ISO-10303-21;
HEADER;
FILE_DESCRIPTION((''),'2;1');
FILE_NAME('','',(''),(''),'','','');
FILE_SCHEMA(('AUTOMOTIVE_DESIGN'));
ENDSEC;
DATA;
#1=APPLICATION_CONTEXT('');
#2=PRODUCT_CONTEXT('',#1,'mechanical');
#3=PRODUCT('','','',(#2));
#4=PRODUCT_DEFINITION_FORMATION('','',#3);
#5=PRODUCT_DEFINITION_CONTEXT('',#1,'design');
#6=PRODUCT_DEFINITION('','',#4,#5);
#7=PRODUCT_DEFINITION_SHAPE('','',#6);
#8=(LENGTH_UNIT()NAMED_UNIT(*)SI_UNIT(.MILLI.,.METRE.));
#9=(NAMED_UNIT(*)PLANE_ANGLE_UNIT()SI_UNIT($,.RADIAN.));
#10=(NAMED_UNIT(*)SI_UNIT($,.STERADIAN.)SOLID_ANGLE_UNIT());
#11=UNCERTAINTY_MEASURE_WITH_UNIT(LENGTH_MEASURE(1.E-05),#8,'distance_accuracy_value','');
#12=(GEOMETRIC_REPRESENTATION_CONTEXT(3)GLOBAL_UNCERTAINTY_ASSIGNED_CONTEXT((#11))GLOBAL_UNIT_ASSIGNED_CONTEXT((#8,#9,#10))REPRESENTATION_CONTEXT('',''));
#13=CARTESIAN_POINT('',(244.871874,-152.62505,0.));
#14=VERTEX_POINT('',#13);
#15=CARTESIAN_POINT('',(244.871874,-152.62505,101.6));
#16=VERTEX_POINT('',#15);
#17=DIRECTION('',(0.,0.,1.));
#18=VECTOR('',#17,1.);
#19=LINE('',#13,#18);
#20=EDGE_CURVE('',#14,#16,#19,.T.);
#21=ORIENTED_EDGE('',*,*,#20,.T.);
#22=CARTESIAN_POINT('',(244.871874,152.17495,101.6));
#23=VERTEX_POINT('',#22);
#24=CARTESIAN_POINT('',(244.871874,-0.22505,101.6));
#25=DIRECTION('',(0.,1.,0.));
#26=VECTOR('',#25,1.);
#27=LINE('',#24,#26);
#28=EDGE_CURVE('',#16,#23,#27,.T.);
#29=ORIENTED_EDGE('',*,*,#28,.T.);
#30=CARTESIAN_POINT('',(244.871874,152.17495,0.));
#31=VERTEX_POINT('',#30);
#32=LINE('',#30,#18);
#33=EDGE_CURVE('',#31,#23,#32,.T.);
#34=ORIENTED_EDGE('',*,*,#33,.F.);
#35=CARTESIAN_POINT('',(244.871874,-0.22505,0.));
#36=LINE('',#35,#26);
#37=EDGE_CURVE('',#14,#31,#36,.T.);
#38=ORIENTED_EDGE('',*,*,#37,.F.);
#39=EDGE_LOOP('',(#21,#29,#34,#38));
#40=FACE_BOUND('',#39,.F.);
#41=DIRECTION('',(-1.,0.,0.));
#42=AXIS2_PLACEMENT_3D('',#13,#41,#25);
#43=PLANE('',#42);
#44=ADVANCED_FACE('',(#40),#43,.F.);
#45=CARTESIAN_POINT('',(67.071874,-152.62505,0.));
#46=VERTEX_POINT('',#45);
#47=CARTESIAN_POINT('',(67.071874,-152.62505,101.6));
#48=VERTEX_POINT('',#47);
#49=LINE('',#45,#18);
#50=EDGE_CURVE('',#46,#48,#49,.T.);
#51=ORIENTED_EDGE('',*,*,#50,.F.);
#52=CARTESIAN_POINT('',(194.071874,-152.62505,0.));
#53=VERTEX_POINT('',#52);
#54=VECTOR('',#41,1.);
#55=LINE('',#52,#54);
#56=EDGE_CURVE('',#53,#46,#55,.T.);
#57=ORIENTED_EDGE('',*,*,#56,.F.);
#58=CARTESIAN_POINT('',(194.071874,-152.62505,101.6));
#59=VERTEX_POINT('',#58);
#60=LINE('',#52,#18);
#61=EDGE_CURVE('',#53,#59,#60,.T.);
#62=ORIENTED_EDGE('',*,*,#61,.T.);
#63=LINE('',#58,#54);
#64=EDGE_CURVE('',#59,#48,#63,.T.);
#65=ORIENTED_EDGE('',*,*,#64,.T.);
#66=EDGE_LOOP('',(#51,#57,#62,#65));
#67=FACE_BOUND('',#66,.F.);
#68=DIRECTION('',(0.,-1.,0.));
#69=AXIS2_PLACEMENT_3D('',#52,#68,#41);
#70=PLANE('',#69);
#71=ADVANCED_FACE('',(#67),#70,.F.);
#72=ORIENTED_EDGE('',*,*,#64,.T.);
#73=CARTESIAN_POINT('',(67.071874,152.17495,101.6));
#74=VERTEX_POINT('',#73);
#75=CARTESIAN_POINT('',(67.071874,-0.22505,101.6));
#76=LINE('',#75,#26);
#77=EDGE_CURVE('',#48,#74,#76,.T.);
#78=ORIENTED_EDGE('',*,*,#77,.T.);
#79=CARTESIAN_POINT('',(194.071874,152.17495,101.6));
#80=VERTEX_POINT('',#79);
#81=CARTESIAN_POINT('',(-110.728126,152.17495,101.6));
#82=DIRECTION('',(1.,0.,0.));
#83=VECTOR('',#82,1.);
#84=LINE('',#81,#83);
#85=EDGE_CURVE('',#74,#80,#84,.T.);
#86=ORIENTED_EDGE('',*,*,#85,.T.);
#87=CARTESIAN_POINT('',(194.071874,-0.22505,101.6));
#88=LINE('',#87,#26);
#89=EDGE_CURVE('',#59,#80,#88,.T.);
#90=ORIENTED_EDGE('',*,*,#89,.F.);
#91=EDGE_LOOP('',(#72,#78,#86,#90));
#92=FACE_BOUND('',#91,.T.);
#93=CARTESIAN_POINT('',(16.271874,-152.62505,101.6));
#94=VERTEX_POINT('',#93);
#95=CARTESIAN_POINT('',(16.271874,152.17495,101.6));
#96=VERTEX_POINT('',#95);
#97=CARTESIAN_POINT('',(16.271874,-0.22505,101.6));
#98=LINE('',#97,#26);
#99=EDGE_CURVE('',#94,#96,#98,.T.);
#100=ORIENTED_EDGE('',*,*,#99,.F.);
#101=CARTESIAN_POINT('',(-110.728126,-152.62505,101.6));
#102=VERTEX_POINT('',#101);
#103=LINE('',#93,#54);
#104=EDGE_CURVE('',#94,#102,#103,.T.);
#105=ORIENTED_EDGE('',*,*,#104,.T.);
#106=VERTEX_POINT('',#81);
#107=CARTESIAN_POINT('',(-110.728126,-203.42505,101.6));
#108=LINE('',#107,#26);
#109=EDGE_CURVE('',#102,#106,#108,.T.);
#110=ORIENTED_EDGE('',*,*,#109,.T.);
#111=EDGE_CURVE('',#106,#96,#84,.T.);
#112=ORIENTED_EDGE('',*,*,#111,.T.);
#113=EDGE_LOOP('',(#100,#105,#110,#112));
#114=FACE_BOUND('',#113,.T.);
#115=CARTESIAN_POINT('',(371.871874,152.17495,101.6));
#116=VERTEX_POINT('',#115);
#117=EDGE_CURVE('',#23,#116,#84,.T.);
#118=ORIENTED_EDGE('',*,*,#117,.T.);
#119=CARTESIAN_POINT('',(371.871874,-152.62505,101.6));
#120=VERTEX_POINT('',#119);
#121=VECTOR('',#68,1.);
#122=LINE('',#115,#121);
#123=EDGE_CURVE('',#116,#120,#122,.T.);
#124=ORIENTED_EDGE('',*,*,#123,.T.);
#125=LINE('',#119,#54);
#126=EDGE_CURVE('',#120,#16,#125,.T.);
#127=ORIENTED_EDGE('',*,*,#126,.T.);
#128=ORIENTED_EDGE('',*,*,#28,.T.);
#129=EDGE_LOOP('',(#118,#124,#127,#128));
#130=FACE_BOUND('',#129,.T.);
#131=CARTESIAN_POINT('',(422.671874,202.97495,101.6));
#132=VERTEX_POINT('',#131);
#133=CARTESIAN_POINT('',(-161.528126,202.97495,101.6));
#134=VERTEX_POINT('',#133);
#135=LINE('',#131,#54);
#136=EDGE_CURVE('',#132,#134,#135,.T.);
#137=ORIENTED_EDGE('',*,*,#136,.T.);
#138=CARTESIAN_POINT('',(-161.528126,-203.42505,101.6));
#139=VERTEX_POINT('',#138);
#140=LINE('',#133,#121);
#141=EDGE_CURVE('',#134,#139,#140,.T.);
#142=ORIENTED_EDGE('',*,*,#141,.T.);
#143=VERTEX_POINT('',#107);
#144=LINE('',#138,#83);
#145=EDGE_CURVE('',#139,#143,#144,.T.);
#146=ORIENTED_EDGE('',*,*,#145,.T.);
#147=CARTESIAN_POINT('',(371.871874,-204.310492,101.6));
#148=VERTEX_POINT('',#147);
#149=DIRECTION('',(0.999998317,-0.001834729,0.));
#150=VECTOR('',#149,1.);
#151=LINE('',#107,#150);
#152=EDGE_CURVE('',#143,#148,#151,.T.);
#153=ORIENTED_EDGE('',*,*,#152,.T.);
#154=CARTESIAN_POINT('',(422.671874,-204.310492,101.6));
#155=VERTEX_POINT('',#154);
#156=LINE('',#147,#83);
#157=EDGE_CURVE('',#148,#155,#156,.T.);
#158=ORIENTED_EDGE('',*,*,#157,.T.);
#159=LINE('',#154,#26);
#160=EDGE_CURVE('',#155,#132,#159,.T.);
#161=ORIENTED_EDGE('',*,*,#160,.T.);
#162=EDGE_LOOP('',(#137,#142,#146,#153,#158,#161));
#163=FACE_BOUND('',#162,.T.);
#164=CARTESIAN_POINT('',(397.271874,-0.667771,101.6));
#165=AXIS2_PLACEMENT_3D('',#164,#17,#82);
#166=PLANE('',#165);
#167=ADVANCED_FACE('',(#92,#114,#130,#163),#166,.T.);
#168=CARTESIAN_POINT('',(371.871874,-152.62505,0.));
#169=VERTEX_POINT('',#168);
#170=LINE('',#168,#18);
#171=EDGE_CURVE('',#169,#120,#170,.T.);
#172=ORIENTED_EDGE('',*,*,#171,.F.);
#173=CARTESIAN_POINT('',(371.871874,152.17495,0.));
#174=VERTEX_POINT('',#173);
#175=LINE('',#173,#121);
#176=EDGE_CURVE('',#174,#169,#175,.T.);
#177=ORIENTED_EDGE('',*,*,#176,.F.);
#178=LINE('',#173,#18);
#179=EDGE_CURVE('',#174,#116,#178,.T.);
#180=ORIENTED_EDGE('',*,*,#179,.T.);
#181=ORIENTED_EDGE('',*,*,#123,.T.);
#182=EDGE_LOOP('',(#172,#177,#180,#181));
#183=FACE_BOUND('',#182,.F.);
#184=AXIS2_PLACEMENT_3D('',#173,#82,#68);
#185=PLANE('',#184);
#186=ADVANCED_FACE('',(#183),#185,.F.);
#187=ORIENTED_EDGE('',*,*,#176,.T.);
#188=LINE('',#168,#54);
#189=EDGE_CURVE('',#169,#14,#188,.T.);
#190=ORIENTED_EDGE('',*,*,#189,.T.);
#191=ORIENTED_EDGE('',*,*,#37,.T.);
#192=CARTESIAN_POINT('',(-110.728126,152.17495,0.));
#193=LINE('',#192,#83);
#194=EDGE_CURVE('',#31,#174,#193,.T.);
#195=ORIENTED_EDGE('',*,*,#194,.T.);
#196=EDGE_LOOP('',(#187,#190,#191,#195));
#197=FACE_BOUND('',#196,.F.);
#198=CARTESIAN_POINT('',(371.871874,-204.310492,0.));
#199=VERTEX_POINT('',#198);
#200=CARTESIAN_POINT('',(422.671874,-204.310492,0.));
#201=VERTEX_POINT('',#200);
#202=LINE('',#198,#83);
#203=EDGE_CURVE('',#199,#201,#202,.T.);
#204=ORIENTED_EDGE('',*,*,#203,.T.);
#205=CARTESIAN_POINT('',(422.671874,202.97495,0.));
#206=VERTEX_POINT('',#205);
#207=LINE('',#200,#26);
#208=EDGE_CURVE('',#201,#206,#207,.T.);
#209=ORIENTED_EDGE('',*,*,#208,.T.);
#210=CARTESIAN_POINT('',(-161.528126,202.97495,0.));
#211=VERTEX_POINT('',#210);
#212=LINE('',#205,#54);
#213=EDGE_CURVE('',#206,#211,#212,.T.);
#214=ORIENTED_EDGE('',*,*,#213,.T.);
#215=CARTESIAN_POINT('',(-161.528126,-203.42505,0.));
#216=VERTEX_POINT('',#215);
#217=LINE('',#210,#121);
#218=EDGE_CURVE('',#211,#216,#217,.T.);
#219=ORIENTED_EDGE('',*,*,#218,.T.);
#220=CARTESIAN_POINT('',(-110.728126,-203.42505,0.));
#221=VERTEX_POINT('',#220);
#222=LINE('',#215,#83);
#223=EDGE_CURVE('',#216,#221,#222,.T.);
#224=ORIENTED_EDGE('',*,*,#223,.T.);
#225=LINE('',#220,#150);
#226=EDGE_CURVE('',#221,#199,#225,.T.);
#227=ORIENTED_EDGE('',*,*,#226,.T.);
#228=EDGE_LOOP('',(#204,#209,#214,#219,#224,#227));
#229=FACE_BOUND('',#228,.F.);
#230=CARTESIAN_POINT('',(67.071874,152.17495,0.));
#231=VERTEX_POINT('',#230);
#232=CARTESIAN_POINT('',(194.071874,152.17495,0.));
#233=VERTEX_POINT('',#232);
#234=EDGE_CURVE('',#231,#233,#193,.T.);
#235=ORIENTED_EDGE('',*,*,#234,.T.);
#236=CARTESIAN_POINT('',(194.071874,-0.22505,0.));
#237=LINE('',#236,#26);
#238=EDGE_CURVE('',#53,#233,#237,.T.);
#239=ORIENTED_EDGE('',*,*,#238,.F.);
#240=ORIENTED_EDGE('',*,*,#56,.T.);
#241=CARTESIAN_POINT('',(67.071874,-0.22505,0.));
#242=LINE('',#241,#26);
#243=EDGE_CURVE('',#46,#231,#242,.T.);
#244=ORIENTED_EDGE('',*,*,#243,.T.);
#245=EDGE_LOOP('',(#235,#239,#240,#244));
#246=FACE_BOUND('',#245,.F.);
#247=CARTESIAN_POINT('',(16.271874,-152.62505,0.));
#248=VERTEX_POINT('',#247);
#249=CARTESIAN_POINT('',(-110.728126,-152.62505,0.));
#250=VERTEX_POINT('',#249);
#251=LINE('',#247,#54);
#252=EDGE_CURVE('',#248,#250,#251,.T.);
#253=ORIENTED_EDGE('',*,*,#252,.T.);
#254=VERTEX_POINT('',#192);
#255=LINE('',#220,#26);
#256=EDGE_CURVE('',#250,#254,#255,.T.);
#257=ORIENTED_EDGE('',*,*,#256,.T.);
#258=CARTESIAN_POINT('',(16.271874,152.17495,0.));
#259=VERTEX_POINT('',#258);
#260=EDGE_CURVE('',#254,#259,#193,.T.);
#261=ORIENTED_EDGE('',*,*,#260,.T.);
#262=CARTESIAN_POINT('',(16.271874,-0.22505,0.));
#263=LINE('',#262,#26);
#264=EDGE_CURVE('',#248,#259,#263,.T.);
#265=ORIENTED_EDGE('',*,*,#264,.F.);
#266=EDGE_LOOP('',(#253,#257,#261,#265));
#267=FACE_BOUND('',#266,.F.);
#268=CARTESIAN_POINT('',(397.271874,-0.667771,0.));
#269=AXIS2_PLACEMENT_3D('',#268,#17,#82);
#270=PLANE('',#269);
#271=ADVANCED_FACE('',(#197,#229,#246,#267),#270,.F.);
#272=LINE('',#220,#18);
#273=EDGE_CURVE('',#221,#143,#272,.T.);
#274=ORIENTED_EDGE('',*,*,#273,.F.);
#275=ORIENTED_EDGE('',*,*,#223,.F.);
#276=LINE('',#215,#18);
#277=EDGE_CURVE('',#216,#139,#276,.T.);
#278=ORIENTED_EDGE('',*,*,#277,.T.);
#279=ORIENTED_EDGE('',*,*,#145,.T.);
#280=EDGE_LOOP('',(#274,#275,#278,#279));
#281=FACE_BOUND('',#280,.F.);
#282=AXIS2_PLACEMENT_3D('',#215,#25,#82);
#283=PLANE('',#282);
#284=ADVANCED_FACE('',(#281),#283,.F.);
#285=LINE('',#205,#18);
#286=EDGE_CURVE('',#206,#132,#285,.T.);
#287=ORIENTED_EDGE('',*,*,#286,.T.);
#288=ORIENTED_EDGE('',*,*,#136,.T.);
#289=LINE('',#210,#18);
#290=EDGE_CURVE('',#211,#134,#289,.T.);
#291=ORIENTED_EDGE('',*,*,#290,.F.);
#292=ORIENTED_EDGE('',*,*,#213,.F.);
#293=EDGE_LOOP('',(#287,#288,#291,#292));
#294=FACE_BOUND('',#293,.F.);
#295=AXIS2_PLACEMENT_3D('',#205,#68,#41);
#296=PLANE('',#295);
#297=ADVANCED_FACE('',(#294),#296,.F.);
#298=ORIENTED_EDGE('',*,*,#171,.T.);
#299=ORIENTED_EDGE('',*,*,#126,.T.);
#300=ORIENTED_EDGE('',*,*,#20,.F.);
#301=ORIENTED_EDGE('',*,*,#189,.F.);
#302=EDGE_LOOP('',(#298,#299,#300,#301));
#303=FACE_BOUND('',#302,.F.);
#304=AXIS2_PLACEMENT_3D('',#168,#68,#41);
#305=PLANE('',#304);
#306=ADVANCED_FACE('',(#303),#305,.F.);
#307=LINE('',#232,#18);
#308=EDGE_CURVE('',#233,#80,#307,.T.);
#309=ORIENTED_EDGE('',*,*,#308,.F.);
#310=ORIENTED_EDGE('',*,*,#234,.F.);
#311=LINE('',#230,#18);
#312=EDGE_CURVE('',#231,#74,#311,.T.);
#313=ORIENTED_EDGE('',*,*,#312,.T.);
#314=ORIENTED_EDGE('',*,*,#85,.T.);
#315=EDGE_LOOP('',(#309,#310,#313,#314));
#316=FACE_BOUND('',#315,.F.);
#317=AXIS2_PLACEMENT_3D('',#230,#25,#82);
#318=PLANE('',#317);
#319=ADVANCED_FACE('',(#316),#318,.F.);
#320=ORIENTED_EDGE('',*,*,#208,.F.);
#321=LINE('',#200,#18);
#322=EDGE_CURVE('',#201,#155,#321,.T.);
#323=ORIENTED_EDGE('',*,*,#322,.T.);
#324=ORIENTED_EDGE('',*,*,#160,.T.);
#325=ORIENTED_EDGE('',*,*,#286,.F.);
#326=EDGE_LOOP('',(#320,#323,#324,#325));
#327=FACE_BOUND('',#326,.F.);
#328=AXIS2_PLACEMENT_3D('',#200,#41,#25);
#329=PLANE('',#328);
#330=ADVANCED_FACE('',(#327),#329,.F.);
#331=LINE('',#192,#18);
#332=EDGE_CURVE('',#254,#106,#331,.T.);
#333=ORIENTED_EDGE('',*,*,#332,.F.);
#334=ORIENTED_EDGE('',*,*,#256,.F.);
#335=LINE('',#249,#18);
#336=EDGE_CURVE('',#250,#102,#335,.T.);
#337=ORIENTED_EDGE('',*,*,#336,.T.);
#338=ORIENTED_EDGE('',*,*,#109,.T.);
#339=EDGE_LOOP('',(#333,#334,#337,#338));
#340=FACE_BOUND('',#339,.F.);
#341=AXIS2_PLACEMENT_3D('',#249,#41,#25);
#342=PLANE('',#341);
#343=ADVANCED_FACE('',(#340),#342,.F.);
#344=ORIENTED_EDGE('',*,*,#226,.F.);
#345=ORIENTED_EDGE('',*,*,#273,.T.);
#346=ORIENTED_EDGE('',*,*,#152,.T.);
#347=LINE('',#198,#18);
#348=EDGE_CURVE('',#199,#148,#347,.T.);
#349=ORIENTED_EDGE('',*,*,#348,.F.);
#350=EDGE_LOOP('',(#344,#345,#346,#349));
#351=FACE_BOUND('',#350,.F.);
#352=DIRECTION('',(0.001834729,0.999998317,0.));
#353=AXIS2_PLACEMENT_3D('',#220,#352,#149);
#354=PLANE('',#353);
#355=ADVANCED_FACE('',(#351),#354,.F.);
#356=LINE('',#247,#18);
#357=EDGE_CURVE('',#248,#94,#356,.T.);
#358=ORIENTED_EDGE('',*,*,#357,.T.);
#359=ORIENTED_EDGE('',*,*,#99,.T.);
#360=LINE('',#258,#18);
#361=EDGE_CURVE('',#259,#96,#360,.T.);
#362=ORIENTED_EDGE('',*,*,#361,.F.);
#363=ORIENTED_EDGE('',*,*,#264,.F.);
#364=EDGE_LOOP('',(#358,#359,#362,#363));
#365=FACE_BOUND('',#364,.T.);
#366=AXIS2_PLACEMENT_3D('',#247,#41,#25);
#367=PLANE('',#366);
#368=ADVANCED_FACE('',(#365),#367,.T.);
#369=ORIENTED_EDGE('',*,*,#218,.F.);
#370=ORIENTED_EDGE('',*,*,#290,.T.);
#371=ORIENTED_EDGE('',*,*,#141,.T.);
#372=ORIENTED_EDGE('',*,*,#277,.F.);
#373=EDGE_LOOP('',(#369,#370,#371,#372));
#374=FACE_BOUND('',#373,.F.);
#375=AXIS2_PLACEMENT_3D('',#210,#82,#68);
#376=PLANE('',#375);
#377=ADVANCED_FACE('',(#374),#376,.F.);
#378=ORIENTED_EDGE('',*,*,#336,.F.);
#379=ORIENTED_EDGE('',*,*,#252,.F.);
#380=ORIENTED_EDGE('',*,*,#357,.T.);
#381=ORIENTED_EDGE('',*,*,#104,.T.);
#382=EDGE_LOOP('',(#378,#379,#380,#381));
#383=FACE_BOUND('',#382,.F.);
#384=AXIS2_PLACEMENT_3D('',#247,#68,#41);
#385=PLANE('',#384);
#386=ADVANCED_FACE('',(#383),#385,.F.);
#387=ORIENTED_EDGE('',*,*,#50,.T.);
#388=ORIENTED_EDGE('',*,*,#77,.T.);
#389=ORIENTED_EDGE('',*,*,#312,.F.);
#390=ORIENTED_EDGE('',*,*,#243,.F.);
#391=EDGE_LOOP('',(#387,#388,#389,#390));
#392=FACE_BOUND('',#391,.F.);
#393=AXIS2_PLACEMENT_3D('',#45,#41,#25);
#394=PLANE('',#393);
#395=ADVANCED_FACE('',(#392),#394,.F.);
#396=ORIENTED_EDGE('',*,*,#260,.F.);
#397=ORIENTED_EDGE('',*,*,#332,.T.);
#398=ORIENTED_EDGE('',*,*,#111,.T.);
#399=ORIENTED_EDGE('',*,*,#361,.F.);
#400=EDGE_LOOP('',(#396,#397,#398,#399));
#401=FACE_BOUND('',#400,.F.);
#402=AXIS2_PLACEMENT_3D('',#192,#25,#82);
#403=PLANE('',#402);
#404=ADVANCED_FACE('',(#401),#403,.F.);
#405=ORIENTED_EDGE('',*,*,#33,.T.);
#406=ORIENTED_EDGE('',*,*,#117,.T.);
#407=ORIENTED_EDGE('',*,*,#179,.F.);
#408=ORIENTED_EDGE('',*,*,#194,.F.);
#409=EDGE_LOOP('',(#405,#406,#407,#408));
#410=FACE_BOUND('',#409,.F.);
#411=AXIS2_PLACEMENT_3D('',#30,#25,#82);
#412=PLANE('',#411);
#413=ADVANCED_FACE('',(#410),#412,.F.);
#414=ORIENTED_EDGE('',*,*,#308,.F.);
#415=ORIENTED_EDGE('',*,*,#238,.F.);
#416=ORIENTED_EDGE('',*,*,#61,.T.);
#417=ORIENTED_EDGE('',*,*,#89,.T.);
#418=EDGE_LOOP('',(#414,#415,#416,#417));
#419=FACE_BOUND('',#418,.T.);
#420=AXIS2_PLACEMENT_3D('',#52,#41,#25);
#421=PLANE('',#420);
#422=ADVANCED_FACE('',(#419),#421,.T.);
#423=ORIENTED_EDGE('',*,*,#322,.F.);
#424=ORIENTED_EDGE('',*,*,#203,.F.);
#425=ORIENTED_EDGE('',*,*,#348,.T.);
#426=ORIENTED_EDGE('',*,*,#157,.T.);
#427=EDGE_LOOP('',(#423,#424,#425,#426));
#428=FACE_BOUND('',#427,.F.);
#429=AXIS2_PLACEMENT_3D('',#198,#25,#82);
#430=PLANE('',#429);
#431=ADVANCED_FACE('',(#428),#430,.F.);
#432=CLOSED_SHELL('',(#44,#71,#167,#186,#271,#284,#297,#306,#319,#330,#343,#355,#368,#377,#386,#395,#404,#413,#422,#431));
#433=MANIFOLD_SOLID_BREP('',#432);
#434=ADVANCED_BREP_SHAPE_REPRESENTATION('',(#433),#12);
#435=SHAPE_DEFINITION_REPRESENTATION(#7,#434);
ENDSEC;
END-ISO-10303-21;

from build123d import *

# Parameters (mm, degrees)
F0_W     = 50.8
F0_H     = 304.8
F1_DEPTH = 101.6


# Not quite as in the source:
# - a feature names something its author has since deleted; it is built from what else it names


with BuildPart() as f1:
    # F0 (on Top) → F1 (new body)
    with BuildSketch(Plane.XY):
        Polygon((422.6718741447, 202.9749498913), (371.8718741447, 202.9749498913), (371.8718741447, 152.1749498913), (371.8718741447, -152.6250501087), (371.8718741447, -204.3104916811), (422.6718741447, -204.3104916811), align=None)
        Polygon((-110.7281258553, -152.6250501087), (-110.7281258553, 152.1749498913), (-110.7281258553, 202.9749498913), (-161.5281258553, 202.9749498913), (-161.5281258553, -152.6250501087), (-161.5281258553, -203.4250501087), (-110.7281258553, -203.4250501087), align=None)
        Polygon((-110.7281258553, 202.9749498913), (-110.7281258553, 152.1749498913), (16.2718741447, 152.1749498913), (67.0718741447, 152.1749498913), (194.0718741447, 152.1749498913), (244.8718741447, 152.1749498913), (371.8718741447, 152.1749498913), (371.8718741447, 202.9749498913), align=None)
        with Locations((41.6718741447, -0.2250501087)):
            Rectangle(F0_W, F0_H)
        with Locations((219.4718741447, -0.2250501087)):
            Rectangle(F0_W, F0_H)
        Polygon((16.2718741447, -152.6250501087), (-110.7281258553, -152.6250501087), (-110.7281258553, -203.4250501087), (371.8718741447, -204.3104916811), (371.8718741447, -152.6250501087), (244.8718741447, -152.6250501087), (194.0718741447, -152.6250501087), (67.0718741447, -152.6250501087), align=None)
    extrude(amount=F1_DEPTH)


solid = f1.part
